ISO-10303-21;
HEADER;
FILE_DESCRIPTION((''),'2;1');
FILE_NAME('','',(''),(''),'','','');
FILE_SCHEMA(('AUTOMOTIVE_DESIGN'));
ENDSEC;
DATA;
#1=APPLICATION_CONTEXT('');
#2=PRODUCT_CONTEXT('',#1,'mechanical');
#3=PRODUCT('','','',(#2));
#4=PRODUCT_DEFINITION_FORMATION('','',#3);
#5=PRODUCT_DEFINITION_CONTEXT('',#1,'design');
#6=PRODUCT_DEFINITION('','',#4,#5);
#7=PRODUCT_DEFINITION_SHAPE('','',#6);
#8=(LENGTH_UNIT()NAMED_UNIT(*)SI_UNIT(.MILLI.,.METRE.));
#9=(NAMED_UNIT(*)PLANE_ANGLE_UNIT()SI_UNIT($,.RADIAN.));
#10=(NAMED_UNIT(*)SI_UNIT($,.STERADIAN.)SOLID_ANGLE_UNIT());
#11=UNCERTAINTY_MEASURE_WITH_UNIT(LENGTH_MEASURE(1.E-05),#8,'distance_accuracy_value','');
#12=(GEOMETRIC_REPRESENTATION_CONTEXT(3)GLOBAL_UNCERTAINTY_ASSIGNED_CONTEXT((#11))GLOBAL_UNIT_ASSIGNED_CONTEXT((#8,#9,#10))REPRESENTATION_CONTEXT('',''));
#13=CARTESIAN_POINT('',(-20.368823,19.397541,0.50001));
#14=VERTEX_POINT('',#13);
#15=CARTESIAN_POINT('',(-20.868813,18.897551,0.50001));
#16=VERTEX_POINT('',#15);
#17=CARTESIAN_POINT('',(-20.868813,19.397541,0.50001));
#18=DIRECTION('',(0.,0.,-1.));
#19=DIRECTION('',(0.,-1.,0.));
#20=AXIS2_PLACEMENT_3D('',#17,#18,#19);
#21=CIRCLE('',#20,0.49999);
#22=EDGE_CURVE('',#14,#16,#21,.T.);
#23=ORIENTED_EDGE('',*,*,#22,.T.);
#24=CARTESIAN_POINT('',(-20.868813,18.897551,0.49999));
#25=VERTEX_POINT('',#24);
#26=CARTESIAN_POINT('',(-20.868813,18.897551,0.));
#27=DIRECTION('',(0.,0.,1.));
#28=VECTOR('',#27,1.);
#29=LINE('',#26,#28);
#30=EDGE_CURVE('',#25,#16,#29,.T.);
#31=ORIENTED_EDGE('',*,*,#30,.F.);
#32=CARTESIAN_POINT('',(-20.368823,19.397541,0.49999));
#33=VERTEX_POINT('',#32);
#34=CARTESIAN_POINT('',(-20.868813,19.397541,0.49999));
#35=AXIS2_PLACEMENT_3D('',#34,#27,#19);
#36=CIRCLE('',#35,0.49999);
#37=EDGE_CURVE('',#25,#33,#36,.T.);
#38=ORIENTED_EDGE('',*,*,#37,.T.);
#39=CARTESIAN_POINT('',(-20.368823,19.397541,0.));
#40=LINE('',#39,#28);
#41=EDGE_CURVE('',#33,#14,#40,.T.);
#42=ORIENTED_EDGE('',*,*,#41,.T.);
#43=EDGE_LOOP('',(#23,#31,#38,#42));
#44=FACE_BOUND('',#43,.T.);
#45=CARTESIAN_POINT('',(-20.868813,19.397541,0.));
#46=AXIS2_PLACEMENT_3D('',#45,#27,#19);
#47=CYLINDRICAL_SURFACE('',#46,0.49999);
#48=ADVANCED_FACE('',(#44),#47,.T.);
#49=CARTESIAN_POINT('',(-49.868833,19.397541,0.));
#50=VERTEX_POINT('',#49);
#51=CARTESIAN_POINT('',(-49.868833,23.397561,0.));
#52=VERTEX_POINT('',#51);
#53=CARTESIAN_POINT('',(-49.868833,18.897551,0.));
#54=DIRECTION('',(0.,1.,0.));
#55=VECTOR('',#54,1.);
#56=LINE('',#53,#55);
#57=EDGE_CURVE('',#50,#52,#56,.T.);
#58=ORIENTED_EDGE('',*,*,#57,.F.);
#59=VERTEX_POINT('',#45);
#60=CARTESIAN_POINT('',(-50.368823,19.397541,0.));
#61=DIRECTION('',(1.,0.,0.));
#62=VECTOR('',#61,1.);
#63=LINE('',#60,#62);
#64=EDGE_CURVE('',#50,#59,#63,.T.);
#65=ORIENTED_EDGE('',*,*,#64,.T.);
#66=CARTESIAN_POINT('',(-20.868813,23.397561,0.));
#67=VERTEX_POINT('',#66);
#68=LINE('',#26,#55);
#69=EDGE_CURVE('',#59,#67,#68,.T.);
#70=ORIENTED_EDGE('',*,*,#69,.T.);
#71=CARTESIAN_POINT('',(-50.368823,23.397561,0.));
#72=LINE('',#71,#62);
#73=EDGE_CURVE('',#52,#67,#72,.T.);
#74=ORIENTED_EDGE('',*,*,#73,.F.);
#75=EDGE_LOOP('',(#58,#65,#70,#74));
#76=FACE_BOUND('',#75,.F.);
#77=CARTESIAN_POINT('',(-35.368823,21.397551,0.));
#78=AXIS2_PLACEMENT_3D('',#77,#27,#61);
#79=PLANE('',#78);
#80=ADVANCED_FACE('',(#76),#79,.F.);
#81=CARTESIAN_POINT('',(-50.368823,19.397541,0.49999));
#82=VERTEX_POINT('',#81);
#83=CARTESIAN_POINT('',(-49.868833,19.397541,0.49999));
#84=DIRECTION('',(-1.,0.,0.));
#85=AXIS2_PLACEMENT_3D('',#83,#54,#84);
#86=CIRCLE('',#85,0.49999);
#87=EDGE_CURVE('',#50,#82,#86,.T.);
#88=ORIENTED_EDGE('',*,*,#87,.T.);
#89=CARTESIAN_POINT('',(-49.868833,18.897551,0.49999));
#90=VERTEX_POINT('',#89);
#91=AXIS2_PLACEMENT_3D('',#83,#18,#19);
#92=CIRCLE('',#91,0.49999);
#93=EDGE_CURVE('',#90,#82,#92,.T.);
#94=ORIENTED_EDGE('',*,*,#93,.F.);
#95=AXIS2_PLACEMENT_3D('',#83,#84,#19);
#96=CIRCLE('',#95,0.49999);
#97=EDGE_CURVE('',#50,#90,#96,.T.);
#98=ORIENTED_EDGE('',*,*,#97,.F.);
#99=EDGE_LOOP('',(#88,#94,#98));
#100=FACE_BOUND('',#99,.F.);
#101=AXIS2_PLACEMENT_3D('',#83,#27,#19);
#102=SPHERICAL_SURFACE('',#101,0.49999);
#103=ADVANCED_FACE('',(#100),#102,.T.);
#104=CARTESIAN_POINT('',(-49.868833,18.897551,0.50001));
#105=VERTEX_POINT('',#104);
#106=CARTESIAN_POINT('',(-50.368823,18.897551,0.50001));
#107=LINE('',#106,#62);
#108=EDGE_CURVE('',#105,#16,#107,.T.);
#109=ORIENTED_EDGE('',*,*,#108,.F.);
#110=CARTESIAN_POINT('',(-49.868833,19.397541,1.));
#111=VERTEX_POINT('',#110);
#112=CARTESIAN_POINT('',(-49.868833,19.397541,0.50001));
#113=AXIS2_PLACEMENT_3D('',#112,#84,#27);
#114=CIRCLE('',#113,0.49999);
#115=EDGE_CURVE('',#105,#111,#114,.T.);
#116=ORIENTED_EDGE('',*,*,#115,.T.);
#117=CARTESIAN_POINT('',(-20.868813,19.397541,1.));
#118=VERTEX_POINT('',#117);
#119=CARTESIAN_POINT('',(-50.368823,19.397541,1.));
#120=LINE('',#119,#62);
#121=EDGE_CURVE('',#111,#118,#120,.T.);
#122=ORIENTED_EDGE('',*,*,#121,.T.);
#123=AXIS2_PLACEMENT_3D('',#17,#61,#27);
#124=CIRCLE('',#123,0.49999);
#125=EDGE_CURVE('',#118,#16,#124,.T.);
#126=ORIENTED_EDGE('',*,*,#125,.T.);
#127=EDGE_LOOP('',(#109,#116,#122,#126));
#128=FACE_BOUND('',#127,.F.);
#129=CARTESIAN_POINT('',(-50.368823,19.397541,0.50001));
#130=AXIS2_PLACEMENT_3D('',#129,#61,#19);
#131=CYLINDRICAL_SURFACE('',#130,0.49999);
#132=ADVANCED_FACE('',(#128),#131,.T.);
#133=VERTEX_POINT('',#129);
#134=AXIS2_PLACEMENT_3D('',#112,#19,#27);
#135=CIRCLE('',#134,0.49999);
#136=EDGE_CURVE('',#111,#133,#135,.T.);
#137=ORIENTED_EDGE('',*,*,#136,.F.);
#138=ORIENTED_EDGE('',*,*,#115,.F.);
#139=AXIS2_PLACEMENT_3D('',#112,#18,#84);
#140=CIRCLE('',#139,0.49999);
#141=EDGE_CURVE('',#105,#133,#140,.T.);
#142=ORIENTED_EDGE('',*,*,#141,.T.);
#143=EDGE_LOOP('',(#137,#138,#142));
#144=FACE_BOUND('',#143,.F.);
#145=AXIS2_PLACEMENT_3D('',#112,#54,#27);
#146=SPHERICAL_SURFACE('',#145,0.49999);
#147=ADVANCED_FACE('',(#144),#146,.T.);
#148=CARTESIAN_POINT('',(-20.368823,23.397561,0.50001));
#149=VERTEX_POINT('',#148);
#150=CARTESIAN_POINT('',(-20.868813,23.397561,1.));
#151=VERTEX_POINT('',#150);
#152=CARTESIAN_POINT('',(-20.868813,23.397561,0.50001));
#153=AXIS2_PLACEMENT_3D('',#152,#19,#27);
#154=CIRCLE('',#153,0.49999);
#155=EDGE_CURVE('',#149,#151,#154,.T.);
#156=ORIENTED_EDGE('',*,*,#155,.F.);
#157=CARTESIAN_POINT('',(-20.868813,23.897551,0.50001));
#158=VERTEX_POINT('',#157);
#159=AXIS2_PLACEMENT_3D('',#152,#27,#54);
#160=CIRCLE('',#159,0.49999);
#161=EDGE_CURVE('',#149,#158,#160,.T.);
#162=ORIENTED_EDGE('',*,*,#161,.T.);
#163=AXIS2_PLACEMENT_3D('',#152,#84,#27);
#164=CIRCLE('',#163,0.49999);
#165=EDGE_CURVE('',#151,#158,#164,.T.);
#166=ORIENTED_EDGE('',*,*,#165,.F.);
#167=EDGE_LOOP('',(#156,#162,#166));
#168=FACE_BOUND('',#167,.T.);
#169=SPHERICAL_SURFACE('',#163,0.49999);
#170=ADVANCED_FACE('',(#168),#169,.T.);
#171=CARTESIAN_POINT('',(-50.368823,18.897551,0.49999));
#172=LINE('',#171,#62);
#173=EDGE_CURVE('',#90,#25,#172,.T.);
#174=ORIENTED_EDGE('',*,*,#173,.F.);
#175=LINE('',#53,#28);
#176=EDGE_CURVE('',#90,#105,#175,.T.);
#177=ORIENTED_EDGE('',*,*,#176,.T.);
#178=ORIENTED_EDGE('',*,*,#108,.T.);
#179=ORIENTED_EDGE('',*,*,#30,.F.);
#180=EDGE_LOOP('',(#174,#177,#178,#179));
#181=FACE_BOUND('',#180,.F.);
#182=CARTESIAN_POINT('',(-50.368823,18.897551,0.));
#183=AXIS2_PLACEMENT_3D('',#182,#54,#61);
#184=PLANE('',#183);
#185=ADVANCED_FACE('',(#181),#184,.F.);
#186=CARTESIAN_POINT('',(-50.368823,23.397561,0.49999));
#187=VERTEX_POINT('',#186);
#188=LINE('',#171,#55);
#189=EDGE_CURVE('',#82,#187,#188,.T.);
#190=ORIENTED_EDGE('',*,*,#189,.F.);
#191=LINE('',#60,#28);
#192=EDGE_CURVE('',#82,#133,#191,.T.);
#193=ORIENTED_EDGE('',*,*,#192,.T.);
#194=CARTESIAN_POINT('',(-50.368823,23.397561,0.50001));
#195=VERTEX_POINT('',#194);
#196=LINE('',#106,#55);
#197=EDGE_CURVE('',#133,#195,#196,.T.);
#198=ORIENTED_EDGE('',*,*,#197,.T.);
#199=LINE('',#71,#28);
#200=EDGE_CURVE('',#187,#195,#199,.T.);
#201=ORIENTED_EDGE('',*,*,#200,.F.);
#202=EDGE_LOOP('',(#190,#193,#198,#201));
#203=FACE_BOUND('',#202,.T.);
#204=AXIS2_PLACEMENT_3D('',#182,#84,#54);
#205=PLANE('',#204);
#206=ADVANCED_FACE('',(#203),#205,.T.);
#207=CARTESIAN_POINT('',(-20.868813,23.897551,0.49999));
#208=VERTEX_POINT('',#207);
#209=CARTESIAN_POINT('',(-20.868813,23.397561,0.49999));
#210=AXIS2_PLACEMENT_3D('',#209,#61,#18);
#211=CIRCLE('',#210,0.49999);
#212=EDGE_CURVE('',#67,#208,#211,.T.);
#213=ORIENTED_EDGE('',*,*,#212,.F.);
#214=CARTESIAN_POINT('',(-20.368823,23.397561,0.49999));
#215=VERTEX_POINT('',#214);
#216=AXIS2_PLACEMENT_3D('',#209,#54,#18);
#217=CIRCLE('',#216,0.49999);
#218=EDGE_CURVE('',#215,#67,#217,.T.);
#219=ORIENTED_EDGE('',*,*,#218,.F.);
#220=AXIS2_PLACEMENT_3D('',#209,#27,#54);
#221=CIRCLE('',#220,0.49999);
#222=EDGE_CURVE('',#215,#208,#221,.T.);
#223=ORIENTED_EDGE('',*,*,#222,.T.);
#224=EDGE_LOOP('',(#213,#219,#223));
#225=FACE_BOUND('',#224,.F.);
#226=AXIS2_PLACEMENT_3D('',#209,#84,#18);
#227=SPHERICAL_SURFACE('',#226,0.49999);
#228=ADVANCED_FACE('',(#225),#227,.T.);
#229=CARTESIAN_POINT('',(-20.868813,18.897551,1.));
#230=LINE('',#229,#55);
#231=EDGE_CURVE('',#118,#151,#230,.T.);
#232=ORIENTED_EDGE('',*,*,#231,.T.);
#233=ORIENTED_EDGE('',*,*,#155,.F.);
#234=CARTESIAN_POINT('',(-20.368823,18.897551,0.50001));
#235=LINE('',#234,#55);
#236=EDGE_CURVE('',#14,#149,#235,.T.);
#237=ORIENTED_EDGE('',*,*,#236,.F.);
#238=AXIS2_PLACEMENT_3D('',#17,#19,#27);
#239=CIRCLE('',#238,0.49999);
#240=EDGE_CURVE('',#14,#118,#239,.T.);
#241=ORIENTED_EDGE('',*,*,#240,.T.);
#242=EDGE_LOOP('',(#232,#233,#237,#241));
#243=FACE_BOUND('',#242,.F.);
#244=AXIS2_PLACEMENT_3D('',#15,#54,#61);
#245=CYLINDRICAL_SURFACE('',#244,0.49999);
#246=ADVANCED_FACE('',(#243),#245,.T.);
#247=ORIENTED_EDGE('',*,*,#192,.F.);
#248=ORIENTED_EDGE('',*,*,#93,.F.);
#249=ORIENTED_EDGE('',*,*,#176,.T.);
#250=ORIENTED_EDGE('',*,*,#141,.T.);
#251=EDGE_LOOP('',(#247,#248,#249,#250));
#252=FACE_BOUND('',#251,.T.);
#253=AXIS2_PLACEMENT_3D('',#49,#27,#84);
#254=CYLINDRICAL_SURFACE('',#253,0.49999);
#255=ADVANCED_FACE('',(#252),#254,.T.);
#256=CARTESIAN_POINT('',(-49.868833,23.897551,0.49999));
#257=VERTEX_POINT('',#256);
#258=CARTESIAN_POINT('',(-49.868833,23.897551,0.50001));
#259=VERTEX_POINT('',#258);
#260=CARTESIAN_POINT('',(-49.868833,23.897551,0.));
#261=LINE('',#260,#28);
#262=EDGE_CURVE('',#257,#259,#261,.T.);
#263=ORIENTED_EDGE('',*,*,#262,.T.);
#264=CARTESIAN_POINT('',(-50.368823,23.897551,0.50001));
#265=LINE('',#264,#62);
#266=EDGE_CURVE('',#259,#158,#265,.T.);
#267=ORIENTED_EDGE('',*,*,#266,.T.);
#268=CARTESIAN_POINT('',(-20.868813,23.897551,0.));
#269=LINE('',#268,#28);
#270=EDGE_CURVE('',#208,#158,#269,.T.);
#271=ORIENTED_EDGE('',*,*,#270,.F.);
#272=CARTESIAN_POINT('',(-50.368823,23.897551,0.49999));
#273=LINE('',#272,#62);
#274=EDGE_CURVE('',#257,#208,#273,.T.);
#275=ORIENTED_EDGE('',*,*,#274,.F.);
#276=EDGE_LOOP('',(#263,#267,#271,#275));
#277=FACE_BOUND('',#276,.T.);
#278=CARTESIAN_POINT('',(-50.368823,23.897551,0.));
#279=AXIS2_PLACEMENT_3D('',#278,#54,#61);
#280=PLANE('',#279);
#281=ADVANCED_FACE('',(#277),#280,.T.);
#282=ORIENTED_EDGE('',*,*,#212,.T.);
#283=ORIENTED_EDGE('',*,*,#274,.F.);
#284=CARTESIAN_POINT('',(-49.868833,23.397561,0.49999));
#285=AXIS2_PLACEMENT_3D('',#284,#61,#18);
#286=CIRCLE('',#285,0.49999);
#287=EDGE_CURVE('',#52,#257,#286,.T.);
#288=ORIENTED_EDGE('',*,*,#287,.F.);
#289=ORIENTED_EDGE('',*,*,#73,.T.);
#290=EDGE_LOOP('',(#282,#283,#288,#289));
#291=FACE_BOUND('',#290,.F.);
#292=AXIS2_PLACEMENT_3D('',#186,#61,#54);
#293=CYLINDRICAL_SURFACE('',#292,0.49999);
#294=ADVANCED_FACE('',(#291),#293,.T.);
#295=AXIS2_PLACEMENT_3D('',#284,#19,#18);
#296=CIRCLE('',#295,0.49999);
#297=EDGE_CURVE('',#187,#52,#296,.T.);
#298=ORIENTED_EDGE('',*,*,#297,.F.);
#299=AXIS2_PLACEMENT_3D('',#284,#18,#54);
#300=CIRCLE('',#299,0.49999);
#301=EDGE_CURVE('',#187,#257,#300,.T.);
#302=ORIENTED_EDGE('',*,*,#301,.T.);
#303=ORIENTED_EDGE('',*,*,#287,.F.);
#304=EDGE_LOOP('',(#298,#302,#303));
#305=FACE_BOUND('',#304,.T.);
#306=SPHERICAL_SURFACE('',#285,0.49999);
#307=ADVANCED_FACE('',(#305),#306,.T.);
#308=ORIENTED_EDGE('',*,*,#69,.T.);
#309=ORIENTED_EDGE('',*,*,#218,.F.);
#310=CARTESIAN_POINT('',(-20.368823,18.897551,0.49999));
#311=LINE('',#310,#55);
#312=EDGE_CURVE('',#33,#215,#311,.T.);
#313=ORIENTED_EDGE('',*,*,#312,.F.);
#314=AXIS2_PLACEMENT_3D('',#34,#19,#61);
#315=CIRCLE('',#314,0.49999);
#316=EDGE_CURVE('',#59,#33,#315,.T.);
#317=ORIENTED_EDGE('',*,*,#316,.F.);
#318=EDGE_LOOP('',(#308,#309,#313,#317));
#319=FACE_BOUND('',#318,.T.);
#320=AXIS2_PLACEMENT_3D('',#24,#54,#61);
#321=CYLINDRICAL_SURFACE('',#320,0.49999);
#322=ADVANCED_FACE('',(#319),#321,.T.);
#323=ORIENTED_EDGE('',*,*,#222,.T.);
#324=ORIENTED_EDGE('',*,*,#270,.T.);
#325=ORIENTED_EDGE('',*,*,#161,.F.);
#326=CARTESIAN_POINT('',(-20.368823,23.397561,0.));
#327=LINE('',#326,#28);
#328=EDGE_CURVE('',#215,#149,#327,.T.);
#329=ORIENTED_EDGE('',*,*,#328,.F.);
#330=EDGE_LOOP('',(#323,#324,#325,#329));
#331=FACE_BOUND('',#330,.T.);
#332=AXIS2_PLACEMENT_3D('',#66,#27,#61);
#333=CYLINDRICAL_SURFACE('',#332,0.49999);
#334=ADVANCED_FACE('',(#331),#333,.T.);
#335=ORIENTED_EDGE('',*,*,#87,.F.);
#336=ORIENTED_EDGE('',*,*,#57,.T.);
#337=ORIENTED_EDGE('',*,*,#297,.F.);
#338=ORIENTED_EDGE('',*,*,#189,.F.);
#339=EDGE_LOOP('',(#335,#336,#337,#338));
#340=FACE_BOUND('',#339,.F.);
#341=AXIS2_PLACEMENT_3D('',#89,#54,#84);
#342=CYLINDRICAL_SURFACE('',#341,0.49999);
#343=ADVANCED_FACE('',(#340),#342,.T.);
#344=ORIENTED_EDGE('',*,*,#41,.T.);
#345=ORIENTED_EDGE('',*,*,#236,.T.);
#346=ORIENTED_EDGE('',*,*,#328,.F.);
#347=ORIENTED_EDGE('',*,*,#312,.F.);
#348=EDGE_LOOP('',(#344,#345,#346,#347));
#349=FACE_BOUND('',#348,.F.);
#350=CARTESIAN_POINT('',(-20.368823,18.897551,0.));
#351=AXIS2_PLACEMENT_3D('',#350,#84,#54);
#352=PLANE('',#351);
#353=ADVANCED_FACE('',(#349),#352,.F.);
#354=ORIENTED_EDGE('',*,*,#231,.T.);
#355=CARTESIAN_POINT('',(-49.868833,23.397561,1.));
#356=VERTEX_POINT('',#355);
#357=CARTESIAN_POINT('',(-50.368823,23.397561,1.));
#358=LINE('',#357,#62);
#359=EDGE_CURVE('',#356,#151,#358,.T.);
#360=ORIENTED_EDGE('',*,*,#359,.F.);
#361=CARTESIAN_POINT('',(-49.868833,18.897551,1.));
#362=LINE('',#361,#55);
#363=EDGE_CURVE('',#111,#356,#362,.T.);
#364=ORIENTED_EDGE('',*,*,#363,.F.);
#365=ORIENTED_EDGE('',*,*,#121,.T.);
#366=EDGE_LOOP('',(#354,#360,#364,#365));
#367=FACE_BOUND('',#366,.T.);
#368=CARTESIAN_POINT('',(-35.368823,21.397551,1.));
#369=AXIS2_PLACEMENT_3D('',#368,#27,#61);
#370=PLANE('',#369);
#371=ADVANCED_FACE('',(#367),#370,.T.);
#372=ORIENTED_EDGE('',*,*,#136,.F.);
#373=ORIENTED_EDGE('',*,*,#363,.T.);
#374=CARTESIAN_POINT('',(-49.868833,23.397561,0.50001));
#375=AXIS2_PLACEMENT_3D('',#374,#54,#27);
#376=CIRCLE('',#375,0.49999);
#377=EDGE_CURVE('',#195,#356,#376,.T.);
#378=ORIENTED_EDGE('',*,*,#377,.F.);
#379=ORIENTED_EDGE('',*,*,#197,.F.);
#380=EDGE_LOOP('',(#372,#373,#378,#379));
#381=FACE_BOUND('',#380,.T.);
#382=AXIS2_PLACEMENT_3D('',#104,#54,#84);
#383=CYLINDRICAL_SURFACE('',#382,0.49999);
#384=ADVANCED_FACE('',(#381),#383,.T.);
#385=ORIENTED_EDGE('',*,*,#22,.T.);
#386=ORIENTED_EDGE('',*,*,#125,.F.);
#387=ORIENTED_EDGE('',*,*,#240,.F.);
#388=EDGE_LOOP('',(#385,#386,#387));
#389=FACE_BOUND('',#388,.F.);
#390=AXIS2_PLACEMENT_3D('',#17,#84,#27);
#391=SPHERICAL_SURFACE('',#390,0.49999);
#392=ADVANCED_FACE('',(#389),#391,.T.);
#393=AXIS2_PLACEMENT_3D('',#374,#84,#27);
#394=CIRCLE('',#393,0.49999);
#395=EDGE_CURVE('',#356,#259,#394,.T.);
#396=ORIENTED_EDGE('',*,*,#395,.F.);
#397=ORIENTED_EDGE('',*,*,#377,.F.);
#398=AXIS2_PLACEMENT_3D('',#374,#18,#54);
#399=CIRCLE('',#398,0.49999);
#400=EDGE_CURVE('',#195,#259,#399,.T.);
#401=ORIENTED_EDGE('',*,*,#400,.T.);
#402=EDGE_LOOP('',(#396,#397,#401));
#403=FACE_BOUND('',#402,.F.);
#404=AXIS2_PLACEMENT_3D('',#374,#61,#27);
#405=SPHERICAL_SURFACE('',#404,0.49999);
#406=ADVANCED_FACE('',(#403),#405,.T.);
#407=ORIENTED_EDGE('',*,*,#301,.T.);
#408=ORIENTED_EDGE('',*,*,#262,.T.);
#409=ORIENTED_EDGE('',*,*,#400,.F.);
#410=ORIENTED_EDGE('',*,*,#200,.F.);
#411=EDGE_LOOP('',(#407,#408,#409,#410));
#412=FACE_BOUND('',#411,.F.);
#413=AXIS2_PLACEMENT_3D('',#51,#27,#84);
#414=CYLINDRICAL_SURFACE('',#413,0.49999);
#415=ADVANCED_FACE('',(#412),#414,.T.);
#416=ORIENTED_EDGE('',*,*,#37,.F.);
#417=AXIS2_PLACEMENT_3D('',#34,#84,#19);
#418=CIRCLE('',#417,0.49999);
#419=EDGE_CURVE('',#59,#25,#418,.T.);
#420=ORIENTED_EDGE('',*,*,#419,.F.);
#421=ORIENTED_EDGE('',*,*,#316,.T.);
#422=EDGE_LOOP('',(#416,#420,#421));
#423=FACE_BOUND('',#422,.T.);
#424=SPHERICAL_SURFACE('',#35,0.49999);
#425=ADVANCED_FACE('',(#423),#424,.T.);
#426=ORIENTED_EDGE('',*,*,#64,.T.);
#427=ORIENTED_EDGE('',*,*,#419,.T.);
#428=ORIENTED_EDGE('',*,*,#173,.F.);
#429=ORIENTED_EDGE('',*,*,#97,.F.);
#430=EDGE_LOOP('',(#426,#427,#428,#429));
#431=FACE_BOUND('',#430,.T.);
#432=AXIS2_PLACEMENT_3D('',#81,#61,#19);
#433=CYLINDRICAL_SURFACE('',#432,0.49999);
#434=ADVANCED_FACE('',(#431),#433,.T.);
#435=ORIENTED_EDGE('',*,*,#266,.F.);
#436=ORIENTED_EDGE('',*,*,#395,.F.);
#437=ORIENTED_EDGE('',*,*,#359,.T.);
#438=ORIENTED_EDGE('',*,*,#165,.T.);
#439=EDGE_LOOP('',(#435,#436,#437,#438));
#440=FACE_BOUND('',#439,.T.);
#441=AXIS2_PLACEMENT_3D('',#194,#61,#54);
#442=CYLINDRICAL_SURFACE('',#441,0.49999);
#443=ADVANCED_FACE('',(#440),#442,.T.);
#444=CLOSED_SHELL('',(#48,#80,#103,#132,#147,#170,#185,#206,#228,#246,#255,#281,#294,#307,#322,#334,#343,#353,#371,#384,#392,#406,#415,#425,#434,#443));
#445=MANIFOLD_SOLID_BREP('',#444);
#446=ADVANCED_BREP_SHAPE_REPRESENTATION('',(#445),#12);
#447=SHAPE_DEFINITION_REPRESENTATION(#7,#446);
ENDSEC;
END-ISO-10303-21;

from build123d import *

# Parameters (mm, degrees)
F0_W     = 30
F0_H     = 5
F1_DEPTH = 1
F2_R     = 0.49999


# Not quite as in the source:
# - a fillet or chamfer is up to 0.001 mm smaller than in the source, because OpenCascade refuses the exact size


with BuildPart() as f1:
    # F0 (on Top) → F1 (new body)
    with BuildSketch(Plane.XY):
        with Locations((-35.3688234463, 21.3975507232)):
            Rectangle(F0_W, F0_H)
    extrude(amount=F1_DEPTH)

    # F2 (radius 0.5 in the source; OpenCascade refuses exactly that, so slightly less here)
    f2_edges = [f1.edges().sort_by_distance(p)[0] for p in [
        (-35.368823, 23.897551, 1),
        (-50.368823, 21.397551, 1),
        (-35.368823, 18.897551, 1),
        (-20.368823, 21.397551, 1),
        (-50.368823, 18.897551, 0.5),
        (-20.368823, 18.897551, 0.5),
        (-35.368823, 18.897551, 0),
        (-35.368823, 23.897551, 0),
        (-50.368823, 21.397551, 0),
        (-20.368823, 21.397551, 0),
        (-20.368823, 23.897551, 0.5),
        (-50.368823, 23.897551, 0.5),
    ]]
    fillet(f2_edges, radius=F2_R)


solid = f1.part
